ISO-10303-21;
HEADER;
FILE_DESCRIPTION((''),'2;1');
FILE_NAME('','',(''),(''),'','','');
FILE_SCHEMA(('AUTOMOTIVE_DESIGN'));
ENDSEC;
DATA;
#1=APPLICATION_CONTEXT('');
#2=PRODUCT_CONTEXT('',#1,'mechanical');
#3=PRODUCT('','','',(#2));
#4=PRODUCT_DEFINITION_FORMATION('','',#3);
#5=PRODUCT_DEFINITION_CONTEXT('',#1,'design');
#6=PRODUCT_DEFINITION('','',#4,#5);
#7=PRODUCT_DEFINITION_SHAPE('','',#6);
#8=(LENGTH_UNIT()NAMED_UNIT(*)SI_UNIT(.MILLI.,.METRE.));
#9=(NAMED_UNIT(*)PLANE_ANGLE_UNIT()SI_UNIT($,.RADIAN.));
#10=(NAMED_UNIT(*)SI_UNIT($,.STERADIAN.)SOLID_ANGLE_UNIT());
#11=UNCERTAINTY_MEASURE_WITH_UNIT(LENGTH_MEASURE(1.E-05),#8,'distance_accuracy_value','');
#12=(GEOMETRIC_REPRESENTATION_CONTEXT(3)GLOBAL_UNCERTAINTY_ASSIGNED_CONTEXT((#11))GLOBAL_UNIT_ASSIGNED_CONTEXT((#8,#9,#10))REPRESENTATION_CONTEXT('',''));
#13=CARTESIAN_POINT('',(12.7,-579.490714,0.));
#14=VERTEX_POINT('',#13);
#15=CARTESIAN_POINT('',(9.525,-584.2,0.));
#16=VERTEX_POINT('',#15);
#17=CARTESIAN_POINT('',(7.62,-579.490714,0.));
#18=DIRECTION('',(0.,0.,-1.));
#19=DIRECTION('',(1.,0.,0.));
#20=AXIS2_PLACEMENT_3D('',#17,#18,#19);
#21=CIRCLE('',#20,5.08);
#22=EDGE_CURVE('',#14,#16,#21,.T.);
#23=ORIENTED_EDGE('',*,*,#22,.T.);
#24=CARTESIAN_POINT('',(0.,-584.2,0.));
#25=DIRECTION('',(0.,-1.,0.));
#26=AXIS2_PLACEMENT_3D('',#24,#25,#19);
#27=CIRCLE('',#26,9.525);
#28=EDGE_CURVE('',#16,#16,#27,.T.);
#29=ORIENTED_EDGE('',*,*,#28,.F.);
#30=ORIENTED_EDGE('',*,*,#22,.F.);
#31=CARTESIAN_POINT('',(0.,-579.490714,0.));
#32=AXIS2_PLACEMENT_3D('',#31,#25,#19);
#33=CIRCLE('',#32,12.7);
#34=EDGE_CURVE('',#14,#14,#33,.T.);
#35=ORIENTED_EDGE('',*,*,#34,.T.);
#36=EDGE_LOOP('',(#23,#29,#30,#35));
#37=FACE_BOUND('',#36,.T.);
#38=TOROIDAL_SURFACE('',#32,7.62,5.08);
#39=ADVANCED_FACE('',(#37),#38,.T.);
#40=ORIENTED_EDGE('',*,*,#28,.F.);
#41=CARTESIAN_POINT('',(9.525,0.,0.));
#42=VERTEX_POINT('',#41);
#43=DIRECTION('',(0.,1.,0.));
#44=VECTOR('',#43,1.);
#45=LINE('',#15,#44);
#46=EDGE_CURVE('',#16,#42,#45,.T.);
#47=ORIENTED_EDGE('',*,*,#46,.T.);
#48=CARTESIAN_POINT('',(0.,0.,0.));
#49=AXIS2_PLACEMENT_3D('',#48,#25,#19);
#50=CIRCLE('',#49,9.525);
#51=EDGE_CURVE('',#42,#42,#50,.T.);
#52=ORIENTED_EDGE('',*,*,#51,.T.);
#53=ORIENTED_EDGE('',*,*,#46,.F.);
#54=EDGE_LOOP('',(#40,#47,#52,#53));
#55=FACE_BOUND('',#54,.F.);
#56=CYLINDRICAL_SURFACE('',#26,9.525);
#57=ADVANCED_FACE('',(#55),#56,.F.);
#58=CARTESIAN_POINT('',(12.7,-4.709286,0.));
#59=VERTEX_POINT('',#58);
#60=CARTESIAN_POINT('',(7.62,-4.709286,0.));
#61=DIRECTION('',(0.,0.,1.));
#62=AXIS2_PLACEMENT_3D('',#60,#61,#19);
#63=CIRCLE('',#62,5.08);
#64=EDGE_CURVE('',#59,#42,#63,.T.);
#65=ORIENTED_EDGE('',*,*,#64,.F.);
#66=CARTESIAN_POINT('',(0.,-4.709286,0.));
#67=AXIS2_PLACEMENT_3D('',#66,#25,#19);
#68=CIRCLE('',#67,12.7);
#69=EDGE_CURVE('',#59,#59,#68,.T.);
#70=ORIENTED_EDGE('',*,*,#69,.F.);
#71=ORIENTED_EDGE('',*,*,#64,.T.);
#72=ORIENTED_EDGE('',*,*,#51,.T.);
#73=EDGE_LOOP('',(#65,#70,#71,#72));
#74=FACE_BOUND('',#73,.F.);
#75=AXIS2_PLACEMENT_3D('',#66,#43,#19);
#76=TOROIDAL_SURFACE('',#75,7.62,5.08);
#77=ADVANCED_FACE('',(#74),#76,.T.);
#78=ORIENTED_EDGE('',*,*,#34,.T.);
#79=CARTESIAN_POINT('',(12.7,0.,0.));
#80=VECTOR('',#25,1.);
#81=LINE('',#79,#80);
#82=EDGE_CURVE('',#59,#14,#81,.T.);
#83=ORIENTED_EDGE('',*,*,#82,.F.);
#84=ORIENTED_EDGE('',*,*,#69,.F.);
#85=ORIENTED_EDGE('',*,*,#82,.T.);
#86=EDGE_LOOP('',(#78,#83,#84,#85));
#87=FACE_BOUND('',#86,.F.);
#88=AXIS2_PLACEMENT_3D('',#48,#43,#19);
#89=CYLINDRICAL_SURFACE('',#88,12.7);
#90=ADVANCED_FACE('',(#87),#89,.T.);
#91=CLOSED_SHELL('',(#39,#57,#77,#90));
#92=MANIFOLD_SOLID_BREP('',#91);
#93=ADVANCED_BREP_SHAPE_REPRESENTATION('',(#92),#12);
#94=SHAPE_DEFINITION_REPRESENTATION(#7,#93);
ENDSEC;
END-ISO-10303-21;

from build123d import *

# Parameters (mm, degrees)
F0_R     = 12.7
F1_DEPTH = 584.2
F2_R     = 9.525
F3_DEPTH = 584.201


# Not quite as in the source:
# - a fillet or chamfer that OpenCascade refuses, or shapes differently, is made with other operations: its cross-section is extruded or revolved along the edge and cut away or added


with BuildPart() as f1:
    # F0 (on Front) → F1 (new body)
    with BuildSketch(Plane.XZ):
        Circle(F0_R)
    extrude(amount=F1_DEPTH)

    # F2 (on face) → F3 (cut, through all)
    with BuildSketch(Plane.XZ.offset(584.2)):
        Circle(F2_R)
    extrude(amount=-F3_DEPTH, mode=Mode.SUBTRACT)

    # F4: fillet of radius 5.08 on 2 edges, made by hand

    # F4_s1 → F4_t2 (revolve, cut)
    with BuildSketch(Plane.XY):
        with BuildLine():
            ThreePointArc((12.7, -579.4907139607), (11.8321134838, -582.3305202921), (9.525, -584.2))
            Line((9.525, -584.2), (12.7, -584.2))
            Line((12.7, -584.2), (12.7, -579.4907139607))
        make_face()
    revolve(axis=Axis((0, -584.2, 0), (0, -1, 0)), mode=Mode.SUBTRACT)

    # F4_s3 → F4_t4 (revolve, cut)
    with BuildSketch(Plane.XY):
        with BuildLine():
            ThreePointArc((12.7, -4.7092860393), (11.8321134838, -1.8694797079), (9.525, 0))
            Line((9.525, 0), (12.7, 0))
            Line((12.7, 0), (12.7, -4.7092860393))
        make_face()
    revolve(axis=Axis((0, 0, 0), (0, -1, 0)), mode=Mode.SUBTRACT)


solid = f1.part
